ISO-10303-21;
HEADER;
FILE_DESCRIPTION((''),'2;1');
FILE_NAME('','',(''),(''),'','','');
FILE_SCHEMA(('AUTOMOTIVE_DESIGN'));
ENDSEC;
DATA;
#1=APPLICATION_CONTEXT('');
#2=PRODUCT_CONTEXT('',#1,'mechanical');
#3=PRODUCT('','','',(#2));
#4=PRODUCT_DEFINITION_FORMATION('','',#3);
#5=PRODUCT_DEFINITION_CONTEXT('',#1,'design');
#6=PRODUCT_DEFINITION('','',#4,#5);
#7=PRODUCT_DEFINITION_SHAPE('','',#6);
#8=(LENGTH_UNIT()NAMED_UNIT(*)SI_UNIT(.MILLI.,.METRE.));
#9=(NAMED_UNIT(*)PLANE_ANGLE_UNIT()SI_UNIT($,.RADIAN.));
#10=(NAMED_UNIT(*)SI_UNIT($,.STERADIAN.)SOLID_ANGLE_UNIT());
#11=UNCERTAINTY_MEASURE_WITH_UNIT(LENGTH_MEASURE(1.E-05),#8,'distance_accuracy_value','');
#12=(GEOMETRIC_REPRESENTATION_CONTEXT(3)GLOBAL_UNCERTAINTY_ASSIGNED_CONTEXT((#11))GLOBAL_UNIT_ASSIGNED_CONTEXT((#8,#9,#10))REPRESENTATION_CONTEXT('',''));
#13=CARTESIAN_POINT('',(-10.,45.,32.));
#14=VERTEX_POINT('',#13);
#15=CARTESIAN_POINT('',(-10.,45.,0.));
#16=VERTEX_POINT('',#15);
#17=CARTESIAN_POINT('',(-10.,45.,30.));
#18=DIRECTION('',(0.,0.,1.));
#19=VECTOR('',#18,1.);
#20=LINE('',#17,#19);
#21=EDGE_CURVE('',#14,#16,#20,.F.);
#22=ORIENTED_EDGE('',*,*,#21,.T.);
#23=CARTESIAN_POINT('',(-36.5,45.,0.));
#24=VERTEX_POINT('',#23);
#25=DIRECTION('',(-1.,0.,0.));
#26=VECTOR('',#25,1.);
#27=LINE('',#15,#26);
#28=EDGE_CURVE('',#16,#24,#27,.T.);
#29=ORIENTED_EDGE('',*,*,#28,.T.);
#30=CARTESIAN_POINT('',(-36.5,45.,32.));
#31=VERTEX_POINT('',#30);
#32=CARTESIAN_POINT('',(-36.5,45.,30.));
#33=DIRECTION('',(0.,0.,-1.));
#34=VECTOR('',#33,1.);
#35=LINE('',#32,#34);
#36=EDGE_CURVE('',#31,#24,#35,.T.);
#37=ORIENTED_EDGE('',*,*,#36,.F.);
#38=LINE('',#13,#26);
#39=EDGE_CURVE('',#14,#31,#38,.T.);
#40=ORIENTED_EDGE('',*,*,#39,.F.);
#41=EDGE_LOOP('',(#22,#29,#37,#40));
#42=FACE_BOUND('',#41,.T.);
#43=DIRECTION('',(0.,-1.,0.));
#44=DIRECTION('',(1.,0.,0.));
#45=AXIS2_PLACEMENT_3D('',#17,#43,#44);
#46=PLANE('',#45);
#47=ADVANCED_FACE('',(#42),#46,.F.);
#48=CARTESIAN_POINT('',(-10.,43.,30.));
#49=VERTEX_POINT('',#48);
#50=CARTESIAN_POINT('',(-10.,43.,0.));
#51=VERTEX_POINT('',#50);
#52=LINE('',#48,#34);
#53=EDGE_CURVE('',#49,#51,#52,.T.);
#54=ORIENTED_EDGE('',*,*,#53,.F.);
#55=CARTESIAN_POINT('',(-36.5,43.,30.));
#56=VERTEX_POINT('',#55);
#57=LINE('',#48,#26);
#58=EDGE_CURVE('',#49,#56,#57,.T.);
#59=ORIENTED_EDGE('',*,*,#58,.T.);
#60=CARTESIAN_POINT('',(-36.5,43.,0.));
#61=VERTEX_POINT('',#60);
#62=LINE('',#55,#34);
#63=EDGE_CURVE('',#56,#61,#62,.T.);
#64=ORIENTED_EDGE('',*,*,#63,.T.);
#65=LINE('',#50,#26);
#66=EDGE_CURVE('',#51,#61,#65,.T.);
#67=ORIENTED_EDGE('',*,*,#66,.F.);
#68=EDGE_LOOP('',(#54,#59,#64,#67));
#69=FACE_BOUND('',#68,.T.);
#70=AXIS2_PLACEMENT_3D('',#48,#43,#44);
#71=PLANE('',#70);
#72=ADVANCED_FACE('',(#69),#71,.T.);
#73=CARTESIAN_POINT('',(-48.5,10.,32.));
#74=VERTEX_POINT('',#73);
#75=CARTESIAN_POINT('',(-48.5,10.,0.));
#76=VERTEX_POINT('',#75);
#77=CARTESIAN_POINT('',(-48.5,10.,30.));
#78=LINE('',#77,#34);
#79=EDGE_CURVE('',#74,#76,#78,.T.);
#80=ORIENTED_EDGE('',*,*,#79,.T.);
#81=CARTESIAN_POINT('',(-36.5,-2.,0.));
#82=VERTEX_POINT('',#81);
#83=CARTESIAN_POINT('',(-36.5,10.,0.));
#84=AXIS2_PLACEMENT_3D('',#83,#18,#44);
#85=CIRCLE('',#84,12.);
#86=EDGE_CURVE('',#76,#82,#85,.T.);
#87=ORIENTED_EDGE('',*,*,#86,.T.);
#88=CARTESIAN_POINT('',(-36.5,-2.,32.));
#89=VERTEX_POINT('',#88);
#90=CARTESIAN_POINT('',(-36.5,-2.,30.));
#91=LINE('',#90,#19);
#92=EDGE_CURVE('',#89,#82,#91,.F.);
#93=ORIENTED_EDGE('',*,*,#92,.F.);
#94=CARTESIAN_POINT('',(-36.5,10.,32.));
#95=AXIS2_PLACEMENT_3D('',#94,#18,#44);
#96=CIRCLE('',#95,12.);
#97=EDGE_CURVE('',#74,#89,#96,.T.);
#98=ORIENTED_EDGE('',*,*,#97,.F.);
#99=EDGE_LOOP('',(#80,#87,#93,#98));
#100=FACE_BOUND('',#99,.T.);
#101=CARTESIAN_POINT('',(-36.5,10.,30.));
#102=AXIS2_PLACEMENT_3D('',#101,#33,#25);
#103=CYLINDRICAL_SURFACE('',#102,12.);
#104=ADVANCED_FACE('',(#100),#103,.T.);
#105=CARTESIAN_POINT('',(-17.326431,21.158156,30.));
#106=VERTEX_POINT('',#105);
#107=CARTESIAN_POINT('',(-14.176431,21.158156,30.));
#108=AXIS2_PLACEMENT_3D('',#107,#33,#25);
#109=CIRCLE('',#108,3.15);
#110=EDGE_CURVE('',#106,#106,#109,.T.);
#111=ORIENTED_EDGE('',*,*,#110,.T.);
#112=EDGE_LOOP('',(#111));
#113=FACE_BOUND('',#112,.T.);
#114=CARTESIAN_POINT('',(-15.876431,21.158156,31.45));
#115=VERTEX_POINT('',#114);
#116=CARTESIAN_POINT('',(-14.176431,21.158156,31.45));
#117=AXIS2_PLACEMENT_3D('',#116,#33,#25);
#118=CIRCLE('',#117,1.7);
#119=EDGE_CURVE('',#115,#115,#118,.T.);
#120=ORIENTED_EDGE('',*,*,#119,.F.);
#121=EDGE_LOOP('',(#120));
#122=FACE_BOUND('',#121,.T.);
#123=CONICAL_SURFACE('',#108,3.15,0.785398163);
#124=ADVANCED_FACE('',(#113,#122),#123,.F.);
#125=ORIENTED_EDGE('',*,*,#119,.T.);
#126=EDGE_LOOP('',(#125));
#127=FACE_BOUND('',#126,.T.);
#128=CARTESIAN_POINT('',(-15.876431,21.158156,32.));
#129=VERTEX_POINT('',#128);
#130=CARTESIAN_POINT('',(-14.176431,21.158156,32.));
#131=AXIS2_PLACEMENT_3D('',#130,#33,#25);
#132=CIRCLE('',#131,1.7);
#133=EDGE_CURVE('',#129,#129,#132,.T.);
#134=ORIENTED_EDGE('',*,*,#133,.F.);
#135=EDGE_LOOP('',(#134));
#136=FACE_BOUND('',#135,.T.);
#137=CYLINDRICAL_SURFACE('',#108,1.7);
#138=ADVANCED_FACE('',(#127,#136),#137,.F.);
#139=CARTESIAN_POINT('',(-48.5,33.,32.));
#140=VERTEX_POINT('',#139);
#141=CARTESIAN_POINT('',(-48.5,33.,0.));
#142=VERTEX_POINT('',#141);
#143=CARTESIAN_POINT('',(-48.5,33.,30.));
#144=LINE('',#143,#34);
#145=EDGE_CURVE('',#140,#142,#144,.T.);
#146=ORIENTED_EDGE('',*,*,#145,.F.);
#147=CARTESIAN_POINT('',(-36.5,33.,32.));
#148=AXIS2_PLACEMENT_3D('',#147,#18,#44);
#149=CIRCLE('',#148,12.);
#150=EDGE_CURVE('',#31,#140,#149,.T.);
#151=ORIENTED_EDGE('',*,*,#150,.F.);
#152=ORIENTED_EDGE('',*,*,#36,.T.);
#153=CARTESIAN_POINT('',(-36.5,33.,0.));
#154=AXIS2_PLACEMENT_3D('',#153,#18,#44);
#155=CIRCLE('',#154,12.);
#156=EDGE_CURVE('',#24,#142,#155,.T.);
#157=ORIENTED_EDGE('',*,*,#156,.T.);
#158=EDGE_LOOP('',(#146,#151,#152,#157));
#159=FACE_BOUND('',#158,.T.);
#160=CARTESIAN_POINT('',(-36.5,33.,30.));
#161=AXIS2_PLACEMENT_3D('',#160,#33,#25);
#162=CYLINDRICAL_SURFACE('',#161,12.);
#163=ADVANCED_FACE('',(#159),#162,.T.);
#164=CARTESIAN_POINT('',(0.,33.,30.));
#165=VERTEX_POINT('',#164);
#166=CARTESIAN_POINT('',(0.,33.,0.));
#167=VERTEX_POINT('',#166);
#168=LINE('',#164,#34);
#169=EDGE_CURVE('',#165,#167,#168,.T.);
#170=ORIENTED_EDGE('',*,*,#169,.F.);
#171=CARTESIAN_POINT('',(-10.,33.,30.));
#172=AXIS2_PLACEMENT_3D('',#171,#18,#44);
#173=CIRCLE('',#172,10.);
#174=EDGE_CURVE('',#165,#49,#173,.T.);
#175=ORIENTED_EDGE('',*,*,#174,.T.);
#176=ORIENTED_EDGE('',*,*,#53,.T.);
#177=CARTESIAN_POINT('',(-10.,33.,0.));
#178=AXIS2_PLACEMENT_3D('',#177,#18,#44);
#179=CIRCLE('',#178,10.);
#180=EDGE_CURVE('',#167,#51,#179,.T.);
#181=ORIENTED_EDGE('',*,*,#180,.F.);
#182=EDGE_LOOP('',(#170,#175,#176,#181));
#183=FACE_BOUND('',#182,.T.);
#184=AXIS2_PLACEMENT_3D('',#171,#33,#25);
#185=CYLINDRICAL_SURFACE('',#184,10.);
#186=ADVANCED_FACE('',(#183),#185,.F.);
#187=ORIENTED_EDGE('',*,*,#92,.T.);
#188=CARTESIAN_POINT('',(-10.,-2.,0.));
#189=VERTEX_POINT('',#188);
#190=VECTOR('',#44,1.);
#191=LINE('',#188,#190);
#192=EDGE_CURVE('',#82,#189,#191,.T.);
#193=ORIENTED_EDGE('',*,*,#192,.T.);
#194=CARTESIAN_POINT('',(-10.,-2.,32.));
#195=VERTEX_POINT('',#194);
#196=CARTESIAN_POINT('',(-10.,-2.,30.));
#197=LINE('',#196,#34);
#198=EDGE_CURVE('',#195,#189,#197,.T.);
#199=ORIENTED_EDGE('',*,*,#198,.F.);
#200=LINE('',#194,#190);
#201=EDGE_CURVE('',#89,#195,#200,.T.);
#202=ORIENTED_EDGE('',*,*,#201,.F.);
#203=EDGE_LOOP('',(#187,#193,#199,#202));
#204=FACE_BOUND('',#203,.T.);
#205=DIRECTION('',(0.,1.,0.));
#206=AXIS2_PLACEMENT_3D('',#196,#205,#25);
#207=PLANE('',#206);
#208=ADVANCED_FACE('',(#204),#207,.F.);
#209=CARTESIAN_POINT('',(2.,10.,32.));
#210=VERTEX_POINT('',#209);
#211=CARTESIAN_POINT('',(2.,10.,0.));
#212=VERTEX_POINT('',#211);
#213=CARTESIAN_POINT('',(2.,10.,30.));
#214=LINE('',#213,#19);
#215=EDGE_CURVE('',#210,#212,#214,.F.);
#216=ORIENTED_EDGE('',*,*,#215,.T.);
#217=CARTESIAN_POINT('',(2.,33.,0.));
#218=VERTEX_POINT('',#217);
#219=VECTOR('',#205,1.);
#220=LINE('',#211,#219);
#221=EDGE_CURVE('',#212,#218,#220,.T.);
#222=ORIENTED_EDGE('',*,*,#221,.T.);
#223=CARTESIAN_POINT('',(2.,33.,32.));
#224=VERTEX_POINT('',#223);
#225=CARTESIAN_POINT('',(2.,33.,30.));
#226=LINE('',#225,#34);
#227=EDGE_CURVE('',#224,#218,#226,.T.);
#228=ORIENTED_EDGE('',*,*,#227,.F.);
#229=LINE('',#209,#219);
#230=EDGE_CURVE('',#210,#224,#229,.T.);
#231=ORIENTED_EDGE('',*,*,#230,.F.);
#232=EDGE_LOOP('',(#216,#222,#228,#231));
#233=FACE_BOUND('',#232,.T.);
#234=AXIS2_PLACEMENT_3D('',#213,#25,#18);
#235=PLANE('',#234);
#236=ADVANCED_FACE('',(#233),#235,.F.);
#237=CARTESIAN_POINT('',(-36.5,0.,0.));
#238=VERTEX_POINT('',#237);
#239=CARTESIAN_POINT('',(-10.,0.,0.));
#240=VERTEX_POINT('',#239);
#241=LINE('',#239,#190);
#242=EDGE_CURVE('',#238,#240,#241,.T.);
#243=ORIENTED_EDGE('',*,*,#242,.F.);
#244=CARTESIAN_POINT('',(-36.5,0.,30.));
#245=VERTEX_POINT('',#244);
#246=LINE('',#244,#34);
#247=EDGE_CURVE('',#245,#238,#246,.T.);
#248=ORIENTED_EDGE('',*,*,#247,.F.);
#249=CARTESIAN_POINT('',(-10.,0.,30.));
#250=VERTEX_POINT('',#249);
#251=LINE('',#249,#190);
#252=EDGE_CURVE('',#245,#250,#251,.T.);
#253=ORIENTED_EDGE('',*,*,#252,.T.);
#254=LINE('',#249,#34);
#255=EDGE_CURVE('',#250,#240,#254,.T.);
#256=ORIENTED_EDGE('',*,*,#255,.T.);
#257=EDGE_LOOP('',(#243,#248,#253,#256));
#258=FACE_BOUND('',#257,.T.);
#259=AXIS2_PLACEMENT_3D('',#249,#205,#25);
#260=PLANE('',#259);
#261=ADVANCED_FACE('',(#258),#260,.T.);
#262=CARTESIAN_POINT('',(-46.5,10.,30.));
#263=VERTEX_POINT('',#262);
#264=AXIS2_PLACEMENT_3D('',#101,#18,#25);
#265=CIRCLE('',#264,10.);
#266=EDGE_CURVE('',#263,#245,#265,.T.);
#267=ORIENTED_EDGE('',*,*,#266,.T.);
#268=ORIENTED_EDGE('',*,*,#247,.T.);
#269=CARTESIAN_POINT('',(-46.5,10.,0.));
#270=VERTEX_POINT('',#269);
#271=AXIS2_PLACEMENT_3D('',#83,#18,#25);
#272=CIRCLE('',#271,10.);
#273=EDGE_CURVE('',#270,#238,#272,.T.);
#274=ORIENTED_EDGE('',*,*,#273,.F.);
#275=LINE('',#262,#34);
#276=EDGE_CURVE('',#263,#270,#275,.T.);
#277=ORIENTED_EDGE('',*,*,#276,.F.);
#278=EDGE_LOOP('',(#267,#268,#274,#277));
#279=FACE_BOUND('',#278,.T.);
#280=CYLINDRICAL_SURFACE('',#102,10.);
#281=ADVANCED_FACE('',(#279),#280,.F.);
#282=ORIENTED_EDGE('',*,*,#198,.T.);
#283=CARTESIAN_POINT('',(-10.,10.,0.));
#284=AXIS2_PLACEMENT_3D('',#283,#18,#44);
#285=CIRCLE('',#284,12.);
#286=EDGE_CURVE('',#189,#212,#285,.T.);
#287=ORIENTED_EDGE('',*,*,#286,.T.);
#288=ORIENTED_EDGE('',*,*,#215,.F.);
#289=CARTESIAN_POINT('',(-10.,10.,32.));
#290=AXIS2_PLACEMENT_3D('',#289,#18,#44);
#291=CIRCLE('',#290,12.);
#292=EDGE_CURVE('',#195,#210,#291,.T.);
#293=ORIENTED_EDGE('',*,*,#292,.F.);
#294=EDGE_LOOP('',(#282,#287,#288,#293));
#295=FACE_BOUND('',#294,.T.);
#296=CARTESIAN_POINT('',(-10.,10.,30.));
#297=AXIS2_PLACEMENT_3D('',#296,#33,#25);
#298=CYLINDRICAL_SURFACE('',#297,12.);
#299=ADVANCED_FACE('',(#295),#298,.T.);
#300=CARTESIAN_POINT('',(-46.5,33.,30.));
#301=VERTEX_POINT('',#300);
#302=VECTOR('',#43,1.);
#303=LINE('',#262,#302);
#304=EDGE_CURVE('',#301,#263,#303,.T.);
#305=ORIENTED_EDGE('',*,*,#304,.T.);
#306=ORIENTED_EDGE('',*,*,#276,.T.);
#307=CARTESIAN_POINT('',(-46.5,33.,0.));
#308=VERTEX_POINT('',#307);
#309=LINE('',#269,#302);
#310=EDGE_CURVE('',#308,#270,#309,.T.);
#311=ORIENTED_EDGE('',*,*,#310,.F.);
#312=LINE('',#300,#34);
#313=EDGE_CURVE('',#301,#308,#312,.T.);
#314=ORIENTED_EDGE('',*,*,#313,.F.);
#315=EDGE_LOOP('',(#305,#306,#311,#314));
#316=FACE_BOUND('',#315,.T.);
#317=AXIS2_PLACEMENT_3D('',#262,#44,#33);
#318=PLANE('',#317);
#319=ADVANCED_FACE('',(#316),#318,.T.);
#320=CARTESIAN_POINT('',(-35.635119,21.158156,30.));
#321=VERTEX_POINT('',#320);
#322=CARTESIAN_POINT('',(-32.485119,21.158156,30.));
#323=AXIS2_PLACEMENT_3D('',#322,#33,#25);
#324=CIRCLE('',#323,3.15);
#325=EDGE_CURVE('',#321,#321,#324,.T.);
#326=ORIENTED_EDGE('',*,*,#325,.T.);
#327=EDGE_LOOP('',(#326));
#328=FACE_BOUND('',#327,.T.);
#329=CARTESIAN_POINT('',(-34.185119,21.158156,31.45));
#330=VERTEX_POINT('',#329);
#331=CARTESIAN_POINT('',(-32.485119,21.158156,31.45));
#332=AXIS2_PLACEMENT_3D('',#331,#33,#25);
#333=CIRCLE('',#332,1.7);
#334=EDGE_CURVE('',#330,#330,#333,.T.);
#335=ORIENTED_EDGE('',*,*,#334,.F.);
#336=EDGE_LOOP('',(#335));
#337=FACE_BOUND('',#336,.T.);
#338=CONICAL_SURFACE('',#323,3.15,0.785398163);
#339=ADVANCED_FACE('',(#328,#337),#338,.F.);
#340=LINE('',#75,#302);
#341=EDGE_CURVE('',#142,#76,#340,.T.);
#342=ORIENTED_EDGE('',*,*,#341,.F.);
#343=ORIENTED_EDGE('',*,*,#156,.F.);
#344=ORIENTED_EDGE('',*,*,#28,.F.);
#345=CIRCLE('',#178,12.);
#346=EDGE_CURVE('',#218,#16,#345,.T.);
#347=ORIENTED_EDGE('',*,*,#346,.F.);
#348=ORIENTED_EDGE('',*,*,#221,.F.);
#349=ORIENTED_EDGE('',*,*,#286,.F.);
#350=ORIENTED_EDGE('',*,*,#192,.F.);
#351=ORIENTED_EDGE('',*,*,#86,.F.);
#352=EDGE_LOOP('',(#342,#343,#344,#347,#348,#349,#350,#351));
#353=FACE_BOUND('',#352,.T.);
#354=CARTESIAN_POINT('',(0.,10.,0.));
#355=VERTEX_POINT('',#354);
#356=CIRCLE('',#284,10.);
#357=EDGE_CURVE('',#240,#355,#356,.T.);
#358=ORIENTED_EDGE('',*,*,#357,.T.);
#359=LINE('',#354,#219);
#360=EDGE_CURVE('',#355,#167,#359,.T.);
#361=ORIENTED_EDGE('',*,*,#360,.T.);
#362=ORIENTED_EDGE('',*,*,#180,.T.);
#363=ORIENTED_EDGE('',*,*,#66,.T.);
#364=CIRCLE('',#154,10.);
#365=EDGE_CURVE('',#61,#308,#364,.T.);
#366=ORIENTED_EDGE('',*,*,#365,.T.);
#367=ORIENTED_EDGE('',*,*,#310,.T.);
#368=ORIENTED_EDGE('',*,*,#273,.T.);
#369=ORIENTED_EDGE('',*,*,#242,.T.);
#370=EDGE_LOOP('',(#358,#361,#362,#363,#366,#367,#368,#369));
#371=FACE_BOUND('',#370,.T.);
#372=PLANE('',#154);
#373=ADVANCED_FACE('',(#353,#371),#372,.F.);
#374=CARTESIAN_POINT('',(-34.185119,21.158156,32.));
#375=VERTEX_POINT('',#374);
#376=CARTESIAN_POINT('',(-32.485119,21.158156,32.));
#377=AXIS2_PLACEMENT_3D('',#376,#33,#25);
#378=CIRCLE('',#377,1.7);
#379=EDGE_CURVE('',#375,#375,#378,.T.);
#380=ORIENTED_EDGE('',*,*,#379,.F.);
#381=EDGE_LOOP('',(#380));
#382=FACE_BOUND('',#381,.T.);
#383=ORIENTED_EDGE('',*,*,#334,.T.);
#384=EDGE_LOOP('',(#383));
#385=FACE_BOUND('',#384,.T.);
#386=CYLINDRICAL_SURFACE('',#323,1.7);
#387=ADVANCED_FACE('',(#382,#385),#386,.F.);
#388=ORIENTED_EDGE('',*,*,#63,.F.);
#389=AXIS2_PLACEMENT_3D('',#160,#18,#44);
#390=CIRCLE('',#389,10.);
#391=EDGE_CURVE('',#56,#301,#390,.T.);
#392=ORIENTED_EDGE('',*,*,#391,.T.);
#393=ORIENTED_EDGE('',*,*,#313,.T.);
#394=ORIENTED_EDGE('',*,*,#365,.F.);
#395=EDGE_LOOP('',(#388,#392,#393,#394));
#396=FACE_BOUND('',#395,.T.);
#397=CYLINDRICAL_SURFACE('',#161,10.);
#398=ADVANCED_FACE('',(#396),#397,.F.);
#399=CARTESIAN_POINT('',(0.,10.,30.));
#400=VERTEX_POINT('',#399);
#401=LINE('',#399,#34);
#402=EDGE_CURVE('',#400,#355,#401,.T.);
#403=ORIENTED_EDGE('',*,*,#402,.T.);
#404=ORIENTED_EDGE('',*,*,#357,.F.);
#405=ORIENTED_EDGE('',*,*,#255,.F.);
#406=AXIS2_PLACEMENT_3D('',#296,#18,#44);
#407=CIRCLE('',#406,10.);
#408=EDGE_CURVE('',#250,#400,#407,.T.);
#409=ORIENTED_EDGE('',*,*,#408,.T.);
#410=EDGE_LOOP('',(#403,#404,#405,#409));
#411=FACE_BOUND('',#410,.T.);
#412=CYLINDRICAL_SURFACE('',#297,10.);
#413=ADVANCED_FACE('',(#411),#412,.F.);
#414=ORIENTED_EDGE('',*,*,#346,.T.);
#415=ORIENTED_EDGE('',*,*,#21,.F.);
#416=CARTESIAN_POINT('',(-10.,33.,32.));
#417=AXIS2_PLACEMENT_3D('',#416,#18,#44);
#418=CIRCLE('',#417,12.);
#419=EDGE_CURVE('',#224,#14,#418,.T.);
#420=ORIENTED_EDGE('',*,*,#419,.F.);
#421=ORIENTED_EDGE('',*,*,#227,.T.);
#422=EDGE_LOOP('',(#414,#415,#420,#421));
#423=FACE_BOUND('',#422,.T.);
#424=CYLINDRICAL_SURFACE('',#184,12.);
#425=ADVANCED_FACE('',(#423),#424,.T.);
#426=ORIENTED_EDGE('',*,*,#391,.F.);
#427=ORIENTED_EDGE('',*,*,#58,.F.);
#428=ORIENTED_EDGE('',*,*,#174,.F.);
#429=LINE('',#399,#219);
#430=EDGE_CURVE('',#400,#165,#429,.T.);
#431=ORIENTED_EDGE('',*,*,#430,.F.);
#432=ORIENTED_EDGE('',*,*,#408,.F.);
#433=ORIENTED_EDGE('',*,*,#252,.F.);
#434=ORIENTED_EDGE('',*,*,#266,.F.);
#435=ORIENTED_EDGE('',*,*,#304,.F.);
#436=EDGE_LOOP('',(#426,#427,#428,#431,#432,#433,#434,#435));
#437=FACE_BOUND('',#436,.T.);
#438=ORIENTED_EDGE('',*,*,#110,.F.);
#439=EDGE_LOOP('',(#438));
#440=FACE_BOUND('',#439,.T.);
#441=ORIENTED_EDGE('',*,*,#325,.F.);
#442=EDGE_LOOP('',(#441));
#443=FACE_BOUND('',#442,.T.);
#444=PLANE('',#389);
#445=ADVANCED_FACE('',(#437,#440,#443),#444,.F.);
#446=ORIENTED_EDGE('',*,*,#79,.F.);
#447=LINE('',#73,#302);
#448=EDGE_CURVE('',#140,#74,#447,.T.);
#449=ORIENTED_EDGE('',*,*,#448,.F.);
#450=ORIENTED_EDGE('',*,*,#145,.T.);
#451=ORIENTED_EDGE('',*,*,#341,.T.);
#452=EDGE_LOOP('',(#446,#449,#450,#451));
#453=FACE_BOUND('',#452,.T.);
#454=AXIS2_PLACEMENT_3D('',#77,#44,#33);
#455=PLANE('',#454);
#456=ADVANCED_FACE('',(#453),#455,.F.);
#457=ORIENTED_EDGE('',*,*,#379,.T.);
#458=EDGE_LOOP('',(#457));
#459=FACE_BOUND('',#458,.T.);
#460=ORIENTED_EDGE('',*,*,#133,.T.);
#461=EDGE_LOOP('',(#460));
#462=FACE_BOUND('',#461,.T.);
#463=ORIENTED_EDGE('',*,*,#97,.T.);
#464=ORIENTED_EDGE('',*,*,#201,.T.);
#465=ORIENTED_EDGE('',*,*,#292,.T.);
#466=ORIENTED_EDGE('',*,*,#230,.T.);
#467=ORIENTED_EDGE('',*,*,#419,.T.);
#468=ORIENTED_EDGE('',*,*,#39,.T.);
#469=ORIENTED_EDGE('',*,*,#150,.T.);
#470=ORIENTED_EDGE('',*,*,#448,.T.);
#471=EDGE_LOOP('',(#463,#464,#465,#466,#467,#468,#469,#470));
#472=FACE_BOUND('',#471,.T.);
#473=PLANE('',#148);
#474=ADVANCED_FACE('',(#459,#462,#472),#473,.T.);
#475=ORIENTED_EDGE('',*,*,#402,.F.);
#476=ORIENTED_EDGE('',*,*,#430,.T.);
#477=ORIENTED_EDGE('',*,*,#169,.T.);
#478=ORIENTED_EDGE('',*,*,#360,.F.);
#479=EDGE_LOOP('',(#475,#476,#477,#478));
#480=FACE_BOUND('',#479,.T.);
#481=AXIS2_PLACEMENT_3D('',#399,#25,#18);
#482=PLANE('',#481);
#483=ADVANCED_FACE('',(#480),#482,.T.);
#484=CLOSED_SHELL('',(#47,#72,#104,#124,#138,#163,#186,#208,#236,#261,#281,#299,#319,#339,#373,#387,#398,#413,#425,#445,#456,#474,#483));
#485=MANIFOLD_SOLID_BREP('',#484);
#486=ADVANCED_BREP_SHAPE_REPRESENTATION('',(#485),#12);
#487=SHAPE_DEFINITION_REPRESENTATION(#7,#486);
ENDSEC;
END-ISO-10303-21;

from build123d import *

# Parameters (mm, degrees)
RESSALTO_EXTRUS_O1_DEPTH                     = 30
CASCA1_START                                 = -36.5
CASCA1_OUTLINE_W                             = 43
CASCA1_OUTLINE_H                             = 30
CASCA1_DEPTH                                 = 26.5
CASCA1_2_DEPTH                               = 26.5
CASCA1_3_DEPTH                               = 30
CASCA1_4_DEPTH                               = 32
CASCA1_START_2                               = 30
CASCA1_5_DEPTH                               = 2
ESCAREADO_PARA_PARAFUSO_COM_CABE_A_E_2_COUNT = 2
ESCAREADO_PARA_PARAFUSO_COM_CABE_A_E_2_PITCH = 18.308687804


with BuildPart() as part:
    # Esboço1 → Ressalto-extrusão1 (new body)
    with BuildSketch(Plane.XY):
        with BuildLine():
            Line((-10, 0), (-36.5, 0))
            ThreePointArc((-36.5, 0), (-43.571067812, 2.928932188), (-46.5, 10))
            Line((-46.5, 10), (-46.5, 33))
            ThreePointArc((-46.5, 33), (-43.571067812, 40.071067812), (-36.5, 43))
            Line((-36.5, 43), (-10, 43))
            ThreePointArc((-10, 43), (-2.928932188, 40.071067812), (0, 33))
            Line((0, 33), (0, 10))
            ThreePointArc((0, 10), (-2.928932188, 2.928932188), (-10, 0))
        make_face()
    extrude(amount=RESSALTO_EXTRUS_O1_DEPTH)

    # Casca1: read off the stored shape, not the designer's step
    # Casca1 outline → Casca1 (cut)
    with BuildSketch(Plane.YZ.offset(CASCA1_START)):
        with Locations((21.5, 15)):
            Rectangle(CASCA1_OUTLINE_W, CASCA1_OUTLINE_H)
    extrude(amount=CASCA1_DEPTH, mode=Mode.SUBTRACT)

    # Casca1 2 outline → Casca1 2 (add)
    with BuildSketch(Plane.YZ.offset(CASCA1_START)):
        Polygon((-2, 32), (-2, 0), (0, 0), (0, 30), (43, 30), (43, 0), (45, 0), (45, 32), align=None)
    extrude(amount=CASCA1_2_DEPTH)

    # Casca1 3 outline → Casca1 3 (cut)
    with BuildSketch(Plane.XY):
        with BuildLine():
            Line((-36.5, 0), (-36.5, 43))
            ThreePointArc((-36.5, 43), (-43.571067812, 40.071067812), (-46.5, 33))
            Line((-46.5, 33), (-46.5, 10))
            ThreePointArc((-46.5, 10), (-43.571067812, 2.928932188), (-36.5, 0))
        make_face()
        with BuildLine():
            Line((-10, 43), (-10, 0))
            ThreePointArc((-10, 0), (-2.928932188, 2.928932188), (0, 10))
            Line((0, 10), (0, 33))
            ThreePointArc((0, 33), (-2.928932188, 40.071067812), (-10, 43))
        make_face()
    extrude(amount=CASCA1_3_DEPTH, mode=Mode.SUBTRACT)

    # Casca1 4 outline → Casca1 4 (add)
    with BuildSketch(Plane.XY):
        with BuildLine():
            ThreePointArc((-36.5, 45), (-44.985281374, 41.485281374), (-48.5, 33))
            Line((-48.5, 33), (-48.5, 10))
            ThreePointArc((-48.5, 10), (-44.985281374, 1.514718626), (-36.5, -2))
            Line((-36.5, -2), (-36.5, 0))
            ThreePointArc((-36.5, 0), (-43.571067812, 2.928932188), (-46.5, 10))
            Line((-46.5, 10), (-46.5, 33))
            ThreePointArc((-46.5, 33), (-43.571067812, 40.071067812), (-36.5, 43))
            Line((-36.5, 43), (-36.5, 45))
        make_face()
        with BuildLine():
            ThreePointArc((-10, -2), (-1.514718626, 1.514718626), (2, 10))
            Line((2, 10), (2, 33))
            ThreePointArc((2, 33), (-1.514718626, 41.485281374), (-10, 45))
            Line((-10, 45), (-10, 43))
            ThreePointArc((-10, 43), (-2.928932188, 40.071067812), (0, 33))
            Line((0, 33), (0, 10))
            ThreePointArc((0, 10), (-2.928932188, 2.928932188), (-10, 0))
            Line((-10, 0), (-10, -2))
        make_face()
    extrude(amount=CASCA1_4_DEPTH)

    # Casca1 5 outline → Casca1 5 (add)
    with BuildSketch(Plane.XY.offset(CASCA1_START_2)):
        with BuildLine():
            Line((-36.5, 0), (-36.5, 43))
            ThreePointArc((-36.5, 43), (-43.571067812, 40.071067812), (-46.5, 33))
            Line((-46.5, 33), (-46.5, 10))
            ThreePointArc((-46.5, 10), (-43.571067812, 2.928932188), (-36.5, 0))
        make_face()
        with BuildLine():
            Line((-10, 43), (-10, 0))
            ThreePointArc((-10, 0), (-2.928932188, 2.928932188), (0, 10))
            Line((0, 10), (0, 33))
            ThreePointArc((0, 33), (-2.928932188, 40.071067812), (-10, 43))
        make_face()
    extrude(amount=CASCA1_5_DEPTH)

    # Esboço4 → Escareado para parafuso com cabeça escareada chata de M31 (revolve, cut)
    with BuildSketch(Plane(origin=(-32.48511858, 21.158156033, 30), x_dir=(0, 1, 0), z_dir=(1, 0, 0))):
        Polygon((0, 0), (0, 2), (1.7, 2), (1.7, 1.45), (3.15, 0), align=None)
    escareado_para_parafuso_com_cabe_a_escar = revolve(axis=Axis((-32.48511858, 21.158156033, 23.65), (0, 0, 1)), mode=Mode.SUBTRACT)

    # Escareado para parafuso com cabe_a e 2: Escareado para parafuso com cabeça escareada chata de M31 ×2
    with Locations(*[(i * ESCAREADO_PARA_PARAFUSO_COM_CABE_A_E_2_PITCH, 0, 0) for i in range(1, ESCAREADO_PARA_PARAFUSO_COM_CABE_A_E_2_COUNT)]):
        add(escareado_para_parafuso_com_cabe_a_escar, mode=Mode.SUBTRACT)


solid = part.part
